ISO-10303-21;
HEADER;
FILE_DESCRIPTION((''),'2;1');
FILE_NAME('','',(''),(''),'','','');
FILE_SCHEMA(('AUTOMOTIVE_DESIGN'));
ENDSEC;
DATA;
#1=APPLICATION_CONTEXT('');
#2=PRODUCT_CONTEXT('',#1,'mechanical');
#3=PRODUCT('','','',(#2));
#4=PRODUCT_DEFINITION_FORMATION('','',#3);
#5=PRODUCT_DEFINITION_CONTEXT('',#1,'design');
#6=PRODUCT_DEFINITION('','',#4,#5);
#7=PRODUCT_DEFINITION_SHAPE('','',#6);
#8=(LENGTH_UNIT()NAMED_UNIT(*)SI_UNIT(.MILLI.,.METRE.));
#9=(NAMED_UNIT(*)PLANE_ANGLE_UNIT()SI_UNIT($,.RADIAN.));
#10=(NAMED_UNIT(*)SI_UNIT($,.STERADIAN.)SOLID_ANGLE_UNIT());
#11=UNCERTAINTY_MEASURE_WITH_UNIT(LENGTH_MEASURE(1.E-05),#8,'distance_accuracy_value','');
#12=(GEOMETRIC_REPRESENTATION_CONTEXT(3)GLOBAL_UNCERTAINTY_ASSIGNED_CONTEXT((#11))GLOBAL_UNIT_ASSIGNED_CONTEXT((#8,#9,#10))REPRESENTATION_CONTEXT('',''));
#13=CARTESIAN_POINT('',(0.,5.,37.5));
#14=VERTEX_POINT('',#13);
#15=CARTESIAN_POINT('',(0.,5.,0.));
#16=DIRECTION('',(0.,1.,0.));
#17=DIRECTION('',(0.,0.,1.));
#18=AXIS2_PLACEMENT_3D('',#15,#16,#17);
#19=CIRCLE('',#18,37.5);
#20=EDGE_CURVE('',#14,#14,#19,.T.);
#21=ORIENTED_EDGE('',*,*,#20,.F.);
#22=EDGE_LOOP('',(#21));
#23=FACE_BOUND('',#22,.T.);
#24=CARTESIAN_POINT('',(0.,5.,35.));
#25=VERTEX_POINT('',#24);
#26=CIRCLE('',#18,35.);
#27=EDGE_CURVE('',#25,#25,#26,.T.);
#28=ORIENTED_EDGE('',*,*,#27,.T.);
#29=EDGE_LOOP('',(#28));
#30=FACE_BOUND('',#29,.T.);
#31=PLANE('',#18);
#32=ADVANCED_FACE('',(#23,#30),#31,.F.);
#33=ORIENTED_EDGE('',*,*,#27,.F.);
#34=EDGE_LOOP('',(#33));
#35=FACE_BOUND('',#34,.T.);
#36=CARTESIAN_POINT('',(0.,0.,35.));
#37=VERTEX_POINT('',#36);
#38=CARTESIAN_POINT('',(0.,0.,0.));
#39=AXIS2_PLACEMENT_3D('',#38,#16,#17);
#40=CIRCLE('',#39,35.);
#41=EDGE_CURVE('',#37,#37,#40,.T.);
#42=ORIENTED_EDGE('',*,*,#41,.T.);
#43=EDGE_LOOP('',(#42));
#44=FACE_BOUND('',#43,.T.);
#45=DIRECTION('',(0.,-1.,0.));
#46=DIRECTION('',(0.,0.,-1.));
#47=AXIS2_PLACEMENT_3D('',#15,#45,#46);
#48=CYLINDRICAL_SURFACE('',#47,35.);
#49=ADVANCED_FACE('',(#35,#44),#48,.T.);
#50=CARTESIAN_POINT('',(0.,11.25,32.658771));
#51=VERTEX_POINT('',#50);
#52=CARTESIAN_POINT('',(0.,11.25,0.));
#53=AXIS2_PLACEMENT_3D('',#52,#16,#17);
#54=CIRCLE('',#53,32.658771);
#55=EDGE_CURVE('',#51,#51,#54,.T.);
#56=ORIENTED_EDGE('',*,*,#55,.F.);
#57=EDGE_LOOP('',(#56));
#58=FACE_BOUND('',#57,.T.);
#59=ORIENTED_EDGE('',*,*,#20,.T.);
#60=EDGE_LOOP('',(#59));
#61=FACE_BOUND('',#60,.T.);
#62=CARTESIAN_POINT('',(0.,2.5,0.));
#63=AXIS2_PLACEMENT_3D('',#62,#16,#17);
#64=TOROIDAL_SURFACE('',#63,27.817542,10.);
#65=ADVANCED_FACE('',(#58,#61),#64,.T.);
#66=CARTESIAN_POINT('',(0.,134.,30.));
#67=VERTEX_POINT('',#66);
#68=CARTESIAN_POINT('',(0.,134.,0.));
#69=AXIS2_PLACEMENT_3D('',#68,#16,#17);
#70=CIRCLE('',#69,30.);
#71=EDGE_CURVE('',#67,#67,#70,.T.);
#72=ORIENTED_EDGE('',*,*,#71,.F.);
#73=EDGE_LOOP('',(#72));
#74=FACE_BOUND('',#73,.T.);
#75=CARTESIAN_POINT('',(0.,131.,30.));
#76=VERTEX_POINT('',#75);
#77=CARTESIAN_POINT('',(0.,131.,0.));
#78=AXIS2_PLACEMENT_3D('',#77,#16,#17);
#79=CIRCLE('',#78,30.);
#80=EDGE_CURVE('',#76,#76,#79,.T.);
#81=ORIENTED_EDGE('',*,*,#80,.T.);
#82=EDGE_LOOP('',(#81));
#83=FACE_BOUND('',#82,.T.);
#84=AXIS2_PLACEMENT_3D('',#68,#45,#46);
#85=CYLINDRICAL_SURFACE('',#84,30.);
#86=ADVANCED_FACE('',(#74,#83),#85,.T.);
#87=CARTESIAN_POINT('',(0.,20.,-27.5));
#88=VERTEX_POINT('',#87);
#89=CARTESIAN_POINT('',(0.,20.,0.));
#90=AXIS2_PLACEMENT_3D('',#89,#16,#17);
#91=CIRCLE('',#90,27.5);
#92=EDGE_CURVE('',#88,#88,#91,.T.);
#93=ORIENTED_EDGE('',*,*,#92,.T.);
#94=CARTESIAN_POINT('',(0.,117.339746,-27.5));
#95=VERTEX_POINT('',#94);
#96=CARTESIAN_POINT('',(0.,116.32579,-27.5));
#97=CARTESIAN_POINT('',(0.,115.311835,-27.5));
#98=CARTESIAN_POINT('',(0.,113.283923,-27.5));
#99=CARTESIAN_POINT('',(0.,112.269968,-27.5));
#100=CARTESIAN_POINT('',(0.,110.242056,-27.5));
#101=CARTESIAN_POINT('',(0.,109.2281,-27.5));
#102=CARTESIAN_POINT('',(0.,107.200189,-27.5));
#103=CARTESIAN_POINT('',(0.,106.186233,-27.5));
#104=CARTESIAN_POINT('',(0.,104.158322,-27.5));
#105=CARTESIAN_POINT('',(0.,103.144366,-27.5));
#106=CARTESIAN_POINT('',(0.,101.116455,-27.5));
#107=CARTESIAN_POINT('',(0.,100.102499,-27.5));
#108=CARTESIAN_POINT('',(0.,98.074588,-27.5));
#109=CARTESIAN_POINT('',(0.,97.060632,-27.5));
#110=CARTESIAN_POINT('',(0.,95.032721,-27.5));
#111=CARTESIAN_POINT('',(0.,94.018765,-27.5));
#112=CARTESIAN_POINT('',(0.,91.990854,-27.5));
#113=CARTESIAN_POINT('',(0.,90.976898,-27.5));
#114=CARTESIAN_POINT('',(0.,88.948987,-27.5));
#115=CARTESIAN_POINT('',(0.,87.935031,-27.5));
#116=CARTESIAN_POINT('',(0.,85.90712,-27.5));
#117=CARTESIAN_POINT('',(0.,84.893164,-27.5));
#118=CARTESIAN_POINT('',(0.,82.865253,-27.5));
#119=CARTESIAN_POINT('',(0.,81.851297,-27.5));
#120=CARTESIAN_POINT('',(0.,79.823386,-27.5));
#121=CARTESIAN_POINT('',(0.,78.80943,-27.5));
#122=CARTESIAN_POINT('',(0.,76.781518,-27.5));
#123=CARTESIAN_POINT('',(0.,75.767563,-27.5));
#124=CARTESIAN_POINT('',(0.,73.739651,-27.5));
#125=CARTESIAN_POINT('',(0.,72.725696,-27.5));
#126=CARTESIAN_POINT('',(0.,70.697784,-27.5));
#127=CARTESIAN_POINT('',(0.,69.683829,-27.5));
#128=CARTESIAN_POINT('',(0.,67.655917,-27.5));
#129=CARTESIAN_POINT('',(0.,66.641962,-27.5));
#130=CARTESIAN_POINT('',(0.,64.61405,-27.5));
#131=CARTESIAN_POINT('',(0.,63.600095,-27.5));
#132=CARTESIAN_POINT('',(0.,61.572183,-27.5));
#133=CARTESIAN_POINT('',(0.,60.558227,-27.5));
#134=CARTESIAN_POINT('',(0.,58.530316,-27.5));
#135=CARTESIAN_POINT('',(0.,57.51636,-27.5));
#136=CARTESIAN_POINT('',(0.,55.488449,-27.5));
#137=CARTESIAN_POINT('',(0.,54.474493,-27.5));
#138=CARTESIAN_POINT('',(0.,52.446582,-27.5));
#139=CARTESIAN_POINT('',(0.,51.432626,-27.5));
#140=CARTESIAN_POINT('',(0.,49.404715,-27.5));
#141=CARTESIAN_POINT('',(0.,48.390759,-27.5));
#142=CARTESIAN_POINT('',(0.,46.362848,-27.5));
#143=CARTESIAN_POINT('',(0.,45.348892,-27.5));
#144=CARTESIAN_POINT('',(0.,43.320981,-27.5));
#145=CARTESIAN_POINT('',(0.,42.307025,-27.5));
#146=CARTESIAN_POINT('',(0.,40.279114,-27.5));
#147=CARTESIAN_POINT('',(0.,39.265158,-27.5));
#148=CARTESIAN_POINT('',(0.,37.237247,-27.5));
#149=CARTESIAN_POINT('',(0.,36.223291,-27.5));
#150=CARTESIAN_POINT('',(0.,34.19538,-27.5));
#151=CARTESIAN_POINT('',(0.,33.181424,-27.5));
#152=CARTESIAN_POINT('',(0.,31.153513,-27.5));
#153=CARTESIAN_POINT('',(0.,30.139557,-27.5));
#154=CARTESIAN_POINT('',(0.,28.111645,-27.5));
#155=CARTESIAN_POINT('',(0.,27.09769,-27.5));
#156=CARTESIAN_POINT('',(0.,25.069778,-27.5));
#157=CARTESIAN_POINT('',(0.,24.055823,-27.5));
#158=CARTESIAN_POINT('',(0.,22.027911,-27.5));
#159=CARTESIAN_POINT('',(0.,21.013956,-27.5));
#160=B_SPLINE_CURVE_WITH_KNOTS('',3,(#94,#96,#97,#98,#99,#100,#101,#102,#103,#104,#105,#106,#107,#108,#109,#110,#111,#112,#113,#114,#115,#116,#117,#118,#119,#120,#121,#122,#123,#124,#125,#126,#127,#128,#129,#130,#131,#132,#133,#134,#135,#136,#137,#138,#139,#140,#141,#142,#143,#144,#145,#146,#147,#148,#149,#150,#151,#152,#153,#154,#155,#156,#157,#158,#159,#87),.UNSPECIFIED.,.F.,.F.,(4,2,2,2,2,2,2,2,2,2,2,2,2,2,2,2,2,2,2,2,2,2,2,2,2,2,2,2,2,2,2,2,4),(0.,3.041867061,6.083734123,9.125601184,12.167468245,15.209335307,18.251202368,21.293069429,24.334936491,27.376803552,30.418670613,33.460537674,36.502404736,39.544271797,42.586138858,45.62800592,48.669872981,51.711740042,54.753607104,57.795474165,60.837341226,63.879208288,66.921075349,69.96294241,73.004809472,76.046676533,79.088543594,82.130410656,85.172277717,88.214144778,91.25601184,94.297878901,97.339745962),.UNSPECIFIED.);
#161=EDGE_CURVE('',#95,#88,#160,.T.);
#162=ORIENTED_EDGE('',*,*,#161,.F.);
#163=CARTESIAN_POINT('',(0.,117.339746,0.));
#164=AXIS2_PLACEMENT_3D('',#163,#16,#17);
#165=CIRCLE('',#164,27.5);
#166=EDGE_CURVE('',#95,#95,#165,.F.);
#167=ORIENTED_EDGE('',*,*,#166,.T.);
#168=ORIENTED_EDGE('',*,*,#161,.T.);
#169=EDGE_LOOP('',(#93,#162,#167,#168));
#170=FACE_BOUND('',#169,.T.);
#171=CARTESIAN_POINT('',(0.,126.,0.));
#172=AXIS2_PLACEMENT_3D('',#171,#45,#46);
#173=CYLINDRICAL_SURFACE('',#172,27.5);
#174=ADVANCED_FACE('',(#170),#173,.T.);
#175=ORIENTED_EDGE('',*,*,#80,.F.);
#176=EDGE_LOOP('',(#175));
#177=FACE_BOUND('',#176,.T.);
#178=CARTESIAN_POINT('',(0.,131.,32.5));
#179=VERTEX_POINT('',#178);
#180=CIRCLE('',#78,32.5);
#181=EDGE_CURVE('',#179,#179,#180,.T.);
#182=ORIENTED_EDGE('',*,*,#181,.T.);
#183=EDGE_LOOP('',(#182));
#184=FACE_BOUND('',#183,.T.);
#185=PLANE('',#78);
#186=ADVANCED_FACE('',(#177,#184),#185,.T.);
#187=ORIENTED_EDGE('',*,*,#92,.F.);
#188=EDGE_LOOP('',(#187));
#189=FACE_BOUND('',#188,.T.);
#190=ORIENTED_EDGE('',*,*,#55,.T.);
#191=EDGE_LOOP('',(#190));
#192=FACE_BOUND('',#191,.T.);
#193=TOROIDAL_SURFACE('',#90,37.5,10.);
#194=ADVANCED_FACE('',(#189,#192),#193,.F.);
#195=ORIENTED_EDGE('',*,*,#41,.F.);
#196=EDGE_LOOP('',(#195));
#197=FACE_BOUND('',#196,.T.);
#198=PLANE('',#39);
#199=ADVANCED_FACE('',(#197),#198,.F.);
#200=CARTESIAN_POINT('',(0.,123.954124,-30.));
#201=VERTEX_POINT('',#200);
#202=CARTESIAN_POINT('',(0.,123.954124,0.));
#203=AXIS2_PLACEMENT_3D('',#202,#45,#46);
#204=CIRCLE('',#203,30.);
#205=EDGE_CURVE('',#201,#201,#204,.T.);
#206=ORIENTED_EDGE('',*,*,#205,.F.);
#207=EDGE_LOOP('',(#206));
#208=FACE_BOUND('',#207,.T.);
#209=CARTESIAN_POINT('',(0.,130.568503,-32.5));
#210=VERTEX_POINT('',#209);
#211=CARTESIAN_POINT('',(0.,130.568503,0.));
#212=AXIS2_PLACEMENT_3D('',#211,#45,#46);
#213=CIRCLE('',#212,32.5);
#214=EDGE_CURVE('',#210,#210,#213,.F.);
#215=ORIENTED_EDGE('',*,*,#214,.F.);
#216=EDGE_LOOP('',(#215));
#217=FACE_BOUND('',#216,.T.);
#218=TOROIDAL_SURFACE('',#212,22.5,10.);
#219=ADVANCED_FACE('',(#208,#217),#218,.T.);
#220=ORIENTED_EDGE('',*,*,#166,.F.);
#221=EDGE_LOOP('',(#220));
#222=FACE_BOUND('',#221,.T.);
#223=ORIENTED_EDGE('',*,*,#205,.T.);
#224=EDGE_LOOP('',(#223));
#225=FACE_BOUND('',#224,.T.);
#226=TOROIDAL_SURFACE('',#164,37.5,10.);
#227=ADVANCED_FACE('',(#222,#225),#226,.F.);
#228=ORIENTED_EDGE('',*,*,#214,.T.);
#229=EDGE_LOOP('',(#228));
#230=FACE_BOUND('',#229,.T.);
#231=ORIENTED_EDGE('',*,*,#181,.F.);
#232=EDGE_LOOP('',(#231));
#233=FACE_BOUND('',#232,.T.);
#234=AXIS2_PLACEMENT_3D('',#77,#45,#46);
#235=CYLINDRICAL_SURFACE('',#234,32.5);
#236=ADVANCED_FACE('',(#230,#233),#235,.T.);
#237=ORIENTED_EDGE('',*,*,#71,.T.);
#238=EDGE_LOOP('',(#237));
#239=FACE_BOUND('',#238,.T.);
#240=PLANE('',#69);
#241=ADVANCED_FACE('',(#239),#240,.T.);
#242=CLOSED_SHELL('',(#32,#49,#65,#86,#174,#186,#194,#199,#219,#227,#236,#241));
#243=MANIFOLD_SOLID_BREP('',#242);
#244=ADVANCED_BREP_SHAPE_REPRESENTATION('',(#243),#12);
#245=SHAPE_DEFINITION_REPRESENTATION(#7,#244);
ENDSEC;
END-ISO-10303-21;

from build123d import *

# Parameters (mm, degrees)
SKETCH1_R           = 35
BOSS_EXTRUDE1_DEPTH = 5
SKETCH3_R           = 37.5
BOSS_EXTRUDE2_DEPTH = 5
SKETCH4_R           = 27.5
BOSS_EXTRUDE5_DEPTH = 116
SKETCH5_R           = 32.5
BOSS_EXTRUDE6_DEPTH = 5
SKETCH6_R           = 30
BOSS_EXTRUDE7_DEPTH = 3
FILLET1_R           = 10
FILLET2_R           = 10


with BuildPart() as part:
    # Sketch1 → Boss-Extrude1 (new body)
    with BuildSketch(Plane(origin=(0, 0, 0), x_dir=(1, 0, 0), z_dir=(0, 1, 0))):
        with Locations(Location((0, 0, 0), (0, 0, 270))):
            Circle(SKETCH1_R)
    extrude(amount=BOSS_EXTRUDE1_DEPTH)

    # Sketch3 → Boss-Extrude2 (add)
    with BuildSketch(Plane(origin=(0, 5, 0), x_dir=(1, 0, 0), z_dir=(0, 1, 0))):
        with Locations(Location((0, 0, 0), (0, 0, 270))):
            Circle(SKETCH3_R)
    extrude(amount=BOSS_EXTRUDE2_DEPTH)

    # Sketch4 → Boss-Extrude5 (add)
    with BuildSketch(Plane(origin=(0, 10, 0), x_dir=(1, 0, 0), z_dir=(0, 1, 0))):
        with Locations(Location((0, 0, 0), (0, 0, 90))):
            Circle(SKETCH4_R)
    extrude(amount=BOSS_EXTRUDE5_DEPTH)

    # Sketch5 → Boss-Extrude6 (add)
    with BuildSketch(Plane(origin=(0, 126, 0), x_dir=(1, 0, 0), z_dir=(0, 1, 0))):
        with Locations(Location((0, 0, 0), (0, 0, 270))):
            Circle(SKETCH5_R)
    extrude(amount=BOSS_EXTRUDE6_DEPTH)

    # Sketch6 → Boss-Extrude7 (add)
    with BuildSketch(Plane(origin=(0, 131, 0), x_dir=(1, 0, 0), z_dir=(0, 1, 0))):
        with Locations(Location((0, 0, 0), (0, 0, 270))):
            Circle(SKETCH6_R)
    extrude(amount=BOSS_EXTRUDE7_DEPTH)

    # Fillet1
    # the kernel refuses this fillet: 10 mm, written as the material it adds along each edge
    with BuildSketch(Plane(origin=(0, 10, 0), x_dir=(0, 0, -1), z_dir=(1, 0, 0))) as fillet1_piece_1:
        with BuildLine():
            CenterArc((27.5 + FILLET1_R, FILLET1_R), FILLET1_R, 180, 90)
            Line((27.5 + FILLET1_R, 0), (27.5 + FILLET1_R, -FILLET1_R * 0.02))
            Line((27.5 + FILLET1_R, -FILLET1_R * 0.02), (27.5 - FILLET1_R * 0.02, -FILLET1_R * 0.02))
            Line((27.5 - FILLET1_R * 0.02, -FILLET1_R * 0.02), (27.5 - FILLET1_R * 0.02, FILLET1_R))
            Line((27.5 - FILLET1_R * 0.02, FILLET1_R), (27.5, FILLET1_R))
        make_face()
    revolve(axis=Axis((0, 10, 0), (0, 1, 0)))
    with BuildSketch(Plane(origin=(0, 126, 0), x_dir=(0, 0, -1), z_dir=(1, 0, 0))) as fillet1_piece_2:
        with BuildLine():
            CenterArc((37.5, -8.660254038), FILLET1_R, 120, 60)
            Line((27.5, -8.660254038), (27.3, -8.660254038))
            Line((27.3, -8.660254038), (27.3, 0))
            Line((27.3, 0), (27.5, 0.2))
            ThreePointArc((27.5, 0.2), (30, 0.2), (32.4, 0.173205081))
            Line((32.4, 0.173205081), (32.5, 0))
        make_face()
    revolve(axis=Axis((0, 126, 0), (0, 1, 0)))

    # Fillet2
    # the kernel refuses this fillet: 10 mm, written as the material it takes off along each edge
    with BuildSketch(Plane(origin=(0, 126, 0), x_dir=(0, 0, 1), z_dir=(-1, 0, 0))) as fillet2_piece_1:
        with BuildLine():
            CenterArc((22.5, 4.568502517), FILLET2_R, 318.590377891, 41.409622109)
            Line((32.5, 4.568502517), (32.7, 4.568502517))
            Line((32.7, 4.568502517), (32.7, 0))
            Line((32.7, 0), (32.6, -0.173205081))
            ThreePointArc((32.6, -0.173205081), (31.293504258, -1.076098804), (30.15, -2.178163326))
            Line((30.15, -2.178163326), (30, -2.04587576))
        make_face()
    revolve(axis=Axis((0, 126, 0), (0, 1, 0)), revolution_arc=180, mode=Mode.SUBTRACT)
    with BuildSketch(Plane(origin=(0, 10, 0), x_dir=(0, 0, -1), z_dir=(1, 0, 0))) as fillet2_piece_2:
        with BuildLine():
            CenterArc((27.817541634, -7.5), FILLET2_R, 14.477512186, 46.567463442)
            Line((37.5, -5), (37.693649167, -4.95))
            ThreePointArc((37.693649167, -4.95), (37.7, -2.5), (37.7, 0))
            Line((37.7, 0), (37.5, 0.2))
            ThreePointArc((37.5, 0.2), (35.05, 0.511190802), (32.755595401, 1.425))
            Line((32.755595401, 1.425), (32.658770817, 1.25))
        make_face()
    revolve(axis=Axis((0, 10, 0), (0, 1, 0)), revolution_arc=180, mode=Mode.SUBTRACT)
    with BuildSketch(Plane(origin=(0, 10, 0), x_dir=(0, 0, 1), z_dir=(-1, 0, 0))) as fillet2_piece_3:
        with BuildLine():
            CenterArc((27.817541634, -7.5), FILLET2_R, 14.477512186, 46.567463442)
            Line((37.5, -5), (37.693649167, -4.95))
            ThreePointArc((37.693649167, -4.95), (37.7, -2.5), (37.7, 0))
            Line((37.7, 0), (37.5, 0.2))
            ThreePointArc((37.5, 0.2), (35.05, 0.511190802), (32.755595401, 1.425))
            Line((32.755595401, 1.425), (32.658770817, 1.25))
        make_face()
    revolve(axis=Axis((0, 10, 0), (0, 1, 0)), revolution_arc=180, mode=Mode.SUBTRACT)
    with BuildSketch(Plane(origin=(0, 126, 0), x_dir=(0, 0, -1), z_dir=(1, 0, 0))) as fillet2_piece_4:
        with BuildLine():
            CenterArc((22.5, 4.568502517), FILLET2_R, 318.590377891, 41.409622109)
            Line((32.5, 4.568502517), (32.7, 4.568502517))
            Line((32.7, 4.568502517), (32.7, 0))
            Line((32.7, 0), (32.6, -0.173205081))
            ThreePointArc((32.6, -0.173205081), (31.293504258, -1.076098804), (30.15, -2.178163326))
            Line((30.15, -2.178163326), (30, -2.04587576))
        make_face()
    revolve(axis=Axis((0, 126, 0), (0, 1, 0)), revolution_arc=180, mode=Mode.SUBTRACT)


solid = part.part
